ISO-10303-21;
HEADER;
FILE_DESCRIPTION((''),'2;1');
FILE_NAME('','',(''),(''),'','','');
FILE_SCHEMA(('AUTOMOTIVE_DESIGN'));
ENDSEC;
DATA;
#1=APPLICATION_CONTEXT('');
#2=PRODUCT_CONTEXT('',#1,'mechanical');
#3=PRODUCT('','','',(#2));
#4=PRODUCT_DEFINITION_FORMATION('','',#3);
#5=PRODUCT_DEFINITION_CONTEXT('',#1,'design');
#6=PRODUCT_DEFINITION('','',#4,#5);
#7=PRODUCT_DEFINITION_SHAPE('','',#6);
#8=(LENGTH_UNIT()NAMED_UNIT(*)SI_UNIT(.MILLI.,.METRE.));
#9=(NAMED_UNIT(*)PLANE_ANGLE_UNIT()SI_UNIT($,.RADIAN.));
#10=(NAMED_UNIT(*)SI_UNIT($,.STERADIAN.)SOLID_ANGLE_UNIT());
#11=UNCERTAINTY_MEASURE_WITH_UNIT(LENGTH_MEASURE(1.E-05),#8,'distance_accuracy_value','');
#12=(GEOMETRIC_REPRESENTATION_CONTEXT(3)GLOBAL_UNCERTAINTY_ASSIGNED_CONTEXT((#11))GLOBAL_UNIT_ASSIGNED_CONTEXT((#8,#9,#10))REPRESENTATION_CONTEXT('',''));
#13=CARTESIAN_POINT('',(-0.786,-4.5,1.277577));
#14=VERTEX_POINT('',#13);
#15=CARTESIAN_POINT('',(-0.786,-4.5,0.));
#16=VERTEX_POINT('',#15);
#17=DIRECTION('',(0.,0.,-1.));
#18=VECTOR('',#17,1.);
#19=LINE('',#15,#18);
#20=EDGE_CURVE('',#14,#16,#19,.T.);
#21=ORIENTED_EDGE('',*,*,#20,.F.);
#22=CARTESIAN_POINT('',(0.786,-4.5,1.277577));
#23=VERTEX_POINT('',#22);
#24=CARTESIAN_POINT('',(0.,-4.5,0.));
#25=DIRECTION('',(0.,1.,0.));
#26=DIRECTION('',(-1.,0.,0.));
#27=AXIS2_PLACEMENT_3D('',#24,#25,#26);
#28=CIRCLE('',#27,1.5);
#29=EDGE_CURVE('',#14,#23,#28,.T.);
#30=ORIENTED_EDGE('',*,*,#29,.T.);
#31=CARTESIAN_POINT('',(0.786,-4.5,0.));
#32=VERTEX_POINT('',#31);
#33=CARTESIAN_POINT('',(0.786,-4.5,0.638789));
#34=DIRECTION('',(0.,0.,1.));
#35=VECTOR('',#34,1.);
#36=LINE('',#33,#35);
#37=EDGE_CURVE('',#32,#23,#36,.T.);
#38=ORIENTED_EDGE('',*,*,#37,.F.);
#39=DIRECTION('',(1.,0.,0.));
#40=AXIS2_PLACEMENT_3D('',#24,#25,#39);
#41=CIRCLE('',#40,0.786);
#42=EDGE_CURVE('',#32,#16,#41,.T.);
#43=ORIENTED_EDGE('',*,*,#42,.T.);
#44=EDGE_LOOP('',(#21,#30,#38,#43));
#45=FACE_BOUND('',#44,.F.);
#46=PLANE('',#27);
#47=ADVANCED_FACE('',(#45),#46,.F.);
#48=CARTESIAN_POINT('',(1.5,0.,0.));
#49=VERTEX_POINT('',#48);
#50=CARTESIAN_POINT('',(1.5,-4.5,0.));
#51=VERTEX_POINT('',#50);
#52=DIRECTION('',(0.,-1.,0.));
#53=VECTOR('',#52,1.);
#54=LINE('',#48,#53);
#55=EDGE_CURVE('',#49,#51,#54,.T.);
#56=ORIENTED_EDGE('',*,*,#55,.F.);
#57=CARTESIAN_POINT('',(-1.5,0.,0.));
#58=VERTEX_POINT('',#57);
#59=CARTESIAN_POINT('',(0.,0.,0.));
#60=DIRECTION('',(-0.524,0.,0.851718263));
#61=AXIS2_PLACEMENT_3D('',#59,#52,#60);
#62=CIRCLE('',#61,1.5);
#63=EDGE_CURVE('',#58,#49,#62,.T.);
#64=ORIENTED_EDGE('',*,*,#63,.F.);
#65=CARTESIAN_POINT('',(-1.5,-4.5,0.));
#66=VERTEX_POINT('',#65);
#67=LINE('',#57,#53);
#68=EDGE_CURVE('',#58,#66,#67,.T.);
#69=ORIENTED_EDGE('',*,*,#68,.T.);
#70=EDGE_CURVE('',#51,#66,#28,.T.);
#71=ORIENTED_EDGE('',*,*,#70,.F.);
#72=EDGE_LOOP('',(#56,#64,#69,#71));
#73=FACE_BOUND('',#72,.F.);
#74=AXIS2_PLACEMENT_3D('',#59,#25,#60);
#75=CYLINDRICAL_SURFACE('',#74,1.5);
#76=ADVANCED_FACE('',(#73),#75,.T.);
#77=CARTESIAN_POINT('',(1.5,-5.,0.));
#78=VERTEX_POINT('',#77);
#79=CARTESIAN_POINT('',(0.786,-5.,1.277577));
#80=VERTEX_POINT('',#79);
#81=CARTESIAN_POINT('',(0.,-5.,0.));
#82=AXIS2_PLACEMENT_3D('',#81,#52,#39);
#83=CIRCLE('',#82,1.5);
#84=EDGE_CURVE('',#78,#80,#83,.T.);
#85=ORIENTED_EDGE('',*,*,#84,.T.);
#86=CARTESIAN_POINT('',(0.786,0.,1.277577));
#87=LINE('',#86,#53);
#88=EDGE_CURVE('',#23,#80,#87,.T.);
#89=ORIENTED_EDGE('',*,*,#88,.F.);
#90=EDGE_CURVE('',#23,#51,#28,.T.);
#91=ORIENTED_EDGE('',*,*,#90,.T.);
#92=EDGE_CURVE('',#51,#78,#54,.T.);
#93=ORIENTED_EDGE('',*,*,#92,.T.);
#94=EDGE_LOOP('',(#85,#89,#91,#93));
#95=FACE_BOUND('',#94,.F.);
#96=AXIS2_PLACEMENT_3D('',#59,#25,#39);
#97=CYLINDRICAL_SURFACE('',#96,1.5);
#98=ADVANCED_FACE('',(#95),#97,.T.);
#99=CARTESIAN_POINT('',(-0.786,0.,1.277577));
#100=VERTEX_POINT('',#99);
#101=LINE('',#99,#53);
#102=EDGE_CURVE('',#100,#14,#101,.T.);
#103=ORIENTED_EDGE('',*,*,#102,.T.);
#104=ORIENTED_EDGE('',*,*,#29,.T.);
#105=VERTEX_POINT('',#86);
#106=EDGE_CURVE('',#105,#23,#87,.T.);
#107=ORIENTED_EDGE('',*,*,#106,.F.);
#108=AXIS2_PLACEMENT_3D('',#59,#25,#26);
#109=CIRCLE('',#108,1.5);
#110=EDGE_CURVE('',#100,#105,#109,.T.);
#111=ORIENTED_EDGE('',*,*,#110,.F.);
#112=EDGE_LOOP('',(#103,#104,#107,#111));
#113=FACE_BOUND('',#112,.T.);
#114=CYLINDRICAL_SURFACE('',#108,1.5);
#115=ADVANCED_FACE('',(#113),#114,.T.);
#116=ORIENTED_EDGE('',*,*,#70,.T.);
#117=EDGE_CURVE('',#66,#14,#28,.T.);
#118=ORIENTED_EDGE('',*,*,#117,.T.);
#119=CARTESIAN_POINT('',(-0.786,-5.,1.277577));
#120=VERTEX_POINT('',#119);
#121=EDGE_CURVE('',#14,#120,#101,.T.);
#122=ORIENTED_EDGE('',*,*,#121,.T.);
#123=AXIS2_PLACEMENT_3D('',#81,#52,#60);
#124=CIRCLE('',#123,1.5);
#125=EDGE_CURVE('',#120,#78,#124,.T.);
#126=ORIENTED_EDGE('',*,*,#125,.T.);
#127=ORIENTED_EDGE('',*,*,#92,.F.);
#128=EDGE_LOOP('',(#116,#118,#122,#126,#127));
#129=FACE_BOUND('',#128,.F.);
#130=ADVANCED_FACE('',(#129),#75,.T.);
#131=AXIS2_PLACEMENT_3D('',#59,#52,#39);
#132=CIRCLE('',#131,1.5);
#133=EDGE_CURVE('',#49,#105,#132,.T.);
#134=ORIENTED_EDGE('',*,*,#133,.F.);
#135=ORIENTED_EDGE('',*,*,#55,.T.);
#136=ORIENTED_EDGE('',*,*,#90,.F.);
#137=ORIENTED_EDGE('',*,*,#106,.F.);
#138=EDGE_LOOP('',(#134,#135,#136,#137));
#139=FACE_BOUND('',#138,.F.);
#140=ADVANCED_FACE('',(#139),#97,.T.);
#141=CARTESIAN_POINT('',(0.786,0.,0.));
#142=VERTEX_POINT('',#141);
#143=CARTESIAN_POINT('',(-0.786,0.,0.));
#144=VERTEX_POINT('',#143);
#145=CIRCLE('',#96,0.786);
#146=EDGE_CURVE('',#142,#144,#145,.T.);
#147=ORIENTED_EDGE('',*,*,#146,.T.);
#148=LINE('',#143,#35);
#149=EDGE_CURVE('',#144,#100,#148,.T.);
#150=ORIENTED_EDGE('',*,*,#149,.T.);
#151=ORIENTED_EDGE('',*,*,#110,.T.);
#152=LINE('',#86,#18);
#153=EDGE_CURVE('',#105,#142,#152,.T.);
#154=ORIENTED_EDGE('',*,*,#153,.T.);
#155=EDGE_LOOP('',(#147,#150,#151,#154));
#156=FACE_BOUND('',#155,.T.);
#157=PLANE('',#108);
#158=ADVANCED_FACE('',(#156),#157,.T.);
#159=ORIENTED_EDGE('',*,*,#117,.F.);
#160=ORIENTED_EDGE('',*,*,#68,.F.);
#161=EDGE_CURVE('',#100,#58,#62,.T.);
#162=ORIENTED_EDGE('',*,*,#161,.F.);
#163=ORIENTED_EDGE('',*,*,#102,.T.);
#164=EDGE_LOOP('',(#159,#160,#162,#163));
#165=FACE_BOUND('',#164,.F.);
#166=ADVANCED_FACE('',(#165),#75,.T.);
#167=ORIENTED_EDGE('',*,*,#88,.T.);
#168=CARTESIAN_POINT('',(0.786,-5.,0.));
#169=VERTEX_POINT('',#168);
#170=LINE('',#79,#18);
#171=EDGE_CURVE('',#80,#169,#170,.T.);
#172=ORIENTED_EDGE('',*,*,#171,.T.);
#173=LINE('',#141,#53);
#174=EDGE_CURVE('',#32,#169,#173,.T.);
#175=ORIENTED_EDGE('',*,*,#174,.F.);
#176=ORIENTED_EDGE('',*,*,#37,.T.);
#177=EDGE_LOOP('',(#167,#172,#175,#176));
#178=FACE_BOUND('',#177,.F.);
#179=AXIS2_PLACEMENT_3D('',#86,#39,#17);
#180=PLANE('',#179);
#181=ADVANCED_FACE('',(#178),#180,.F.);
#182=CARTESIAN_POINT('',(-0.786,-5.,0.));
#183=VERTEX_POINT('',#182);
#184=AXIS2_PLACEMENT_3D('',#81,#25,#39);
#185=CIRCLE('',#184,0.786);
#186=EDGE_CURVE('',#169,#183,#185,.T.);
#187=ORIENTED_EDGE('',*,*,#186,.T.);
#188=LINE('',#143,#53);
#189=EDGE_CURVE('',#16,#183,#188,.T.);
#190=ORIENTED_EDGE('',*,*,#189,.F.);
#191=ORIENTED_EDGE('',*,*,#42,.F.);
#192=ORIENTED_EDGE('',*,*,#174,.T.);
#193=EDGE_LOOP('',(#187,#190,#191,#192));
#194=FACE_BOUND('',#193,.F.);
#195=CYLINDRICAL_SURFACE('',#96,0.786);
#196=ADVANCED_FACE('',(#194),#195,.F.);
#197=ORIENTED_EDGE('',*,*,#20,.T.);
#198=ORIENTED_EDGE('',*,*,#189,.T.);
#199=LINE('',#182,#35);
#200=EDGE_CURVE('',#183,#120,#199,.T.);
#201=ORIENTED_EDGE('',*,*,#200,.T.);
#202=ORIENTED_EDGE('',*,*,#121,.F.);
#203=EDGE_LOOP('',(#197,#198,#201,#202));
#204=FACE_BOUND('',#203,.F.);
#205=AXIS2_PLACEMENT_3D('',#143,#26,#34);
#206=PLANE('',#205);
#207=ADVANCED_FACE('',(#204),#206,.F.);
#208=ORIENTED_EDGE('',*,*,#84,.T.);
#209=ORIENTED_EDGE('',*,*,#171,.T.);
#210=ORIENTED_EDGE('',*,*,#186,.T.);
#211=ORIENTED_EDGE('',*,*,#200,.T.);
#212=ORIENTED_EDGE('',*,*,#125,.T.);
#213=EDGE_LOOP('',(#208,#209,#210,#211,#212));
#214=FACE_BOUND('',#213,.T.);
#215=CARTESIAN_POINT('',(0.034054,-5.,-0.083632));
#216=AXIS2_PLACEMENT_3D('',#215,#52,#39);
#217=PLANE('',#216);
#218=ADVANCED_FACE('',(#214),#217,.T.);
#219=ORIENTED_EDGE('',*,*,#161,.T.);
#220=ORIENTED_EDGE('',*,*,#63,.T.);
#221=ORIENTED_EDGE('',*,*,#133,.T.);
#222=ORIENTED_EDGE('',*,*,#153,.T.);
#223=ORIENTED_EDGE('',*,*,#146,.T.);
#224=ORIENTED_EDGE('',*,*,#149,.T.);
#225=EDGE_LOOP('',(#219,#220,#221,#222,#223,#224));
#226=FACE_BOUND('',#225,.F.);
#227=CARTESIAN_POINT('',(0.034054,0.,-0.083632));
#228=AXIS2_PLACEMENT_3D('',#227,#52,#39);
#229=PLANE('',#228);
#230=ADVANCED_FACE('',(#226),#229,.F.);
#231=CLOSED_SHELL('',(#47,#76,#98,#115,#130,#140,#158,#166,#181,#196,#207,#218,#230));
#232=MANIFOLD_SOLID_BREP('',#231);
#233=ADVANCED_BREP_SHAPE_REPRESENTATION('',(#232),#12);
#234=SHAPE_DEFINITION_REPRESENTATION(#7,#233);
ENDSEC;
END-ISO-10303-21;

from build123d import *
from build123d import SkipClean  # not in build123d's __all__

# Parameters (mm, degrees)
F1_DEPTH = 5
F2_R     = 1.5
F3_DEPTH = 4.5


with BuildPart() as f1:
    # F0 (on Front) → F1 (new body)
    with BuildSketch(Plane.XZ):
        with BuildLine():
            ThreePointArc((-0.786, 1.2775773949), (-0.7317786551, -1.3093891706), (1.5, 0))
            ThreePointArc((1.5, 0), (1.3093891706, 0.7317786551), (0.786, 1.2775773949))
            Line((0.786, 1.2775773949), (0.786, 0))
            ThreePointArc((0.786, 0), (0, -0.786), (-0.786, 0))
            Line((-0.786, 0), (-0.786, 1.2775773949))
        make_face()
    extrude(amount=F1_DEPTH)

    # F2 (on face) → F3 (join)
    with BuildSketch(Plane(origin=(0, 0, 0), x_dir=(-1, 0, 0), z_dir=(0, 1, 0))):
        Circle(F2_R)
    with SkipClean():  # cleaning this boolean's faces spoils the solid; the shape is the same uncleaned
        extrude(amount=-F3_DEPTH)


solid = f1.part
